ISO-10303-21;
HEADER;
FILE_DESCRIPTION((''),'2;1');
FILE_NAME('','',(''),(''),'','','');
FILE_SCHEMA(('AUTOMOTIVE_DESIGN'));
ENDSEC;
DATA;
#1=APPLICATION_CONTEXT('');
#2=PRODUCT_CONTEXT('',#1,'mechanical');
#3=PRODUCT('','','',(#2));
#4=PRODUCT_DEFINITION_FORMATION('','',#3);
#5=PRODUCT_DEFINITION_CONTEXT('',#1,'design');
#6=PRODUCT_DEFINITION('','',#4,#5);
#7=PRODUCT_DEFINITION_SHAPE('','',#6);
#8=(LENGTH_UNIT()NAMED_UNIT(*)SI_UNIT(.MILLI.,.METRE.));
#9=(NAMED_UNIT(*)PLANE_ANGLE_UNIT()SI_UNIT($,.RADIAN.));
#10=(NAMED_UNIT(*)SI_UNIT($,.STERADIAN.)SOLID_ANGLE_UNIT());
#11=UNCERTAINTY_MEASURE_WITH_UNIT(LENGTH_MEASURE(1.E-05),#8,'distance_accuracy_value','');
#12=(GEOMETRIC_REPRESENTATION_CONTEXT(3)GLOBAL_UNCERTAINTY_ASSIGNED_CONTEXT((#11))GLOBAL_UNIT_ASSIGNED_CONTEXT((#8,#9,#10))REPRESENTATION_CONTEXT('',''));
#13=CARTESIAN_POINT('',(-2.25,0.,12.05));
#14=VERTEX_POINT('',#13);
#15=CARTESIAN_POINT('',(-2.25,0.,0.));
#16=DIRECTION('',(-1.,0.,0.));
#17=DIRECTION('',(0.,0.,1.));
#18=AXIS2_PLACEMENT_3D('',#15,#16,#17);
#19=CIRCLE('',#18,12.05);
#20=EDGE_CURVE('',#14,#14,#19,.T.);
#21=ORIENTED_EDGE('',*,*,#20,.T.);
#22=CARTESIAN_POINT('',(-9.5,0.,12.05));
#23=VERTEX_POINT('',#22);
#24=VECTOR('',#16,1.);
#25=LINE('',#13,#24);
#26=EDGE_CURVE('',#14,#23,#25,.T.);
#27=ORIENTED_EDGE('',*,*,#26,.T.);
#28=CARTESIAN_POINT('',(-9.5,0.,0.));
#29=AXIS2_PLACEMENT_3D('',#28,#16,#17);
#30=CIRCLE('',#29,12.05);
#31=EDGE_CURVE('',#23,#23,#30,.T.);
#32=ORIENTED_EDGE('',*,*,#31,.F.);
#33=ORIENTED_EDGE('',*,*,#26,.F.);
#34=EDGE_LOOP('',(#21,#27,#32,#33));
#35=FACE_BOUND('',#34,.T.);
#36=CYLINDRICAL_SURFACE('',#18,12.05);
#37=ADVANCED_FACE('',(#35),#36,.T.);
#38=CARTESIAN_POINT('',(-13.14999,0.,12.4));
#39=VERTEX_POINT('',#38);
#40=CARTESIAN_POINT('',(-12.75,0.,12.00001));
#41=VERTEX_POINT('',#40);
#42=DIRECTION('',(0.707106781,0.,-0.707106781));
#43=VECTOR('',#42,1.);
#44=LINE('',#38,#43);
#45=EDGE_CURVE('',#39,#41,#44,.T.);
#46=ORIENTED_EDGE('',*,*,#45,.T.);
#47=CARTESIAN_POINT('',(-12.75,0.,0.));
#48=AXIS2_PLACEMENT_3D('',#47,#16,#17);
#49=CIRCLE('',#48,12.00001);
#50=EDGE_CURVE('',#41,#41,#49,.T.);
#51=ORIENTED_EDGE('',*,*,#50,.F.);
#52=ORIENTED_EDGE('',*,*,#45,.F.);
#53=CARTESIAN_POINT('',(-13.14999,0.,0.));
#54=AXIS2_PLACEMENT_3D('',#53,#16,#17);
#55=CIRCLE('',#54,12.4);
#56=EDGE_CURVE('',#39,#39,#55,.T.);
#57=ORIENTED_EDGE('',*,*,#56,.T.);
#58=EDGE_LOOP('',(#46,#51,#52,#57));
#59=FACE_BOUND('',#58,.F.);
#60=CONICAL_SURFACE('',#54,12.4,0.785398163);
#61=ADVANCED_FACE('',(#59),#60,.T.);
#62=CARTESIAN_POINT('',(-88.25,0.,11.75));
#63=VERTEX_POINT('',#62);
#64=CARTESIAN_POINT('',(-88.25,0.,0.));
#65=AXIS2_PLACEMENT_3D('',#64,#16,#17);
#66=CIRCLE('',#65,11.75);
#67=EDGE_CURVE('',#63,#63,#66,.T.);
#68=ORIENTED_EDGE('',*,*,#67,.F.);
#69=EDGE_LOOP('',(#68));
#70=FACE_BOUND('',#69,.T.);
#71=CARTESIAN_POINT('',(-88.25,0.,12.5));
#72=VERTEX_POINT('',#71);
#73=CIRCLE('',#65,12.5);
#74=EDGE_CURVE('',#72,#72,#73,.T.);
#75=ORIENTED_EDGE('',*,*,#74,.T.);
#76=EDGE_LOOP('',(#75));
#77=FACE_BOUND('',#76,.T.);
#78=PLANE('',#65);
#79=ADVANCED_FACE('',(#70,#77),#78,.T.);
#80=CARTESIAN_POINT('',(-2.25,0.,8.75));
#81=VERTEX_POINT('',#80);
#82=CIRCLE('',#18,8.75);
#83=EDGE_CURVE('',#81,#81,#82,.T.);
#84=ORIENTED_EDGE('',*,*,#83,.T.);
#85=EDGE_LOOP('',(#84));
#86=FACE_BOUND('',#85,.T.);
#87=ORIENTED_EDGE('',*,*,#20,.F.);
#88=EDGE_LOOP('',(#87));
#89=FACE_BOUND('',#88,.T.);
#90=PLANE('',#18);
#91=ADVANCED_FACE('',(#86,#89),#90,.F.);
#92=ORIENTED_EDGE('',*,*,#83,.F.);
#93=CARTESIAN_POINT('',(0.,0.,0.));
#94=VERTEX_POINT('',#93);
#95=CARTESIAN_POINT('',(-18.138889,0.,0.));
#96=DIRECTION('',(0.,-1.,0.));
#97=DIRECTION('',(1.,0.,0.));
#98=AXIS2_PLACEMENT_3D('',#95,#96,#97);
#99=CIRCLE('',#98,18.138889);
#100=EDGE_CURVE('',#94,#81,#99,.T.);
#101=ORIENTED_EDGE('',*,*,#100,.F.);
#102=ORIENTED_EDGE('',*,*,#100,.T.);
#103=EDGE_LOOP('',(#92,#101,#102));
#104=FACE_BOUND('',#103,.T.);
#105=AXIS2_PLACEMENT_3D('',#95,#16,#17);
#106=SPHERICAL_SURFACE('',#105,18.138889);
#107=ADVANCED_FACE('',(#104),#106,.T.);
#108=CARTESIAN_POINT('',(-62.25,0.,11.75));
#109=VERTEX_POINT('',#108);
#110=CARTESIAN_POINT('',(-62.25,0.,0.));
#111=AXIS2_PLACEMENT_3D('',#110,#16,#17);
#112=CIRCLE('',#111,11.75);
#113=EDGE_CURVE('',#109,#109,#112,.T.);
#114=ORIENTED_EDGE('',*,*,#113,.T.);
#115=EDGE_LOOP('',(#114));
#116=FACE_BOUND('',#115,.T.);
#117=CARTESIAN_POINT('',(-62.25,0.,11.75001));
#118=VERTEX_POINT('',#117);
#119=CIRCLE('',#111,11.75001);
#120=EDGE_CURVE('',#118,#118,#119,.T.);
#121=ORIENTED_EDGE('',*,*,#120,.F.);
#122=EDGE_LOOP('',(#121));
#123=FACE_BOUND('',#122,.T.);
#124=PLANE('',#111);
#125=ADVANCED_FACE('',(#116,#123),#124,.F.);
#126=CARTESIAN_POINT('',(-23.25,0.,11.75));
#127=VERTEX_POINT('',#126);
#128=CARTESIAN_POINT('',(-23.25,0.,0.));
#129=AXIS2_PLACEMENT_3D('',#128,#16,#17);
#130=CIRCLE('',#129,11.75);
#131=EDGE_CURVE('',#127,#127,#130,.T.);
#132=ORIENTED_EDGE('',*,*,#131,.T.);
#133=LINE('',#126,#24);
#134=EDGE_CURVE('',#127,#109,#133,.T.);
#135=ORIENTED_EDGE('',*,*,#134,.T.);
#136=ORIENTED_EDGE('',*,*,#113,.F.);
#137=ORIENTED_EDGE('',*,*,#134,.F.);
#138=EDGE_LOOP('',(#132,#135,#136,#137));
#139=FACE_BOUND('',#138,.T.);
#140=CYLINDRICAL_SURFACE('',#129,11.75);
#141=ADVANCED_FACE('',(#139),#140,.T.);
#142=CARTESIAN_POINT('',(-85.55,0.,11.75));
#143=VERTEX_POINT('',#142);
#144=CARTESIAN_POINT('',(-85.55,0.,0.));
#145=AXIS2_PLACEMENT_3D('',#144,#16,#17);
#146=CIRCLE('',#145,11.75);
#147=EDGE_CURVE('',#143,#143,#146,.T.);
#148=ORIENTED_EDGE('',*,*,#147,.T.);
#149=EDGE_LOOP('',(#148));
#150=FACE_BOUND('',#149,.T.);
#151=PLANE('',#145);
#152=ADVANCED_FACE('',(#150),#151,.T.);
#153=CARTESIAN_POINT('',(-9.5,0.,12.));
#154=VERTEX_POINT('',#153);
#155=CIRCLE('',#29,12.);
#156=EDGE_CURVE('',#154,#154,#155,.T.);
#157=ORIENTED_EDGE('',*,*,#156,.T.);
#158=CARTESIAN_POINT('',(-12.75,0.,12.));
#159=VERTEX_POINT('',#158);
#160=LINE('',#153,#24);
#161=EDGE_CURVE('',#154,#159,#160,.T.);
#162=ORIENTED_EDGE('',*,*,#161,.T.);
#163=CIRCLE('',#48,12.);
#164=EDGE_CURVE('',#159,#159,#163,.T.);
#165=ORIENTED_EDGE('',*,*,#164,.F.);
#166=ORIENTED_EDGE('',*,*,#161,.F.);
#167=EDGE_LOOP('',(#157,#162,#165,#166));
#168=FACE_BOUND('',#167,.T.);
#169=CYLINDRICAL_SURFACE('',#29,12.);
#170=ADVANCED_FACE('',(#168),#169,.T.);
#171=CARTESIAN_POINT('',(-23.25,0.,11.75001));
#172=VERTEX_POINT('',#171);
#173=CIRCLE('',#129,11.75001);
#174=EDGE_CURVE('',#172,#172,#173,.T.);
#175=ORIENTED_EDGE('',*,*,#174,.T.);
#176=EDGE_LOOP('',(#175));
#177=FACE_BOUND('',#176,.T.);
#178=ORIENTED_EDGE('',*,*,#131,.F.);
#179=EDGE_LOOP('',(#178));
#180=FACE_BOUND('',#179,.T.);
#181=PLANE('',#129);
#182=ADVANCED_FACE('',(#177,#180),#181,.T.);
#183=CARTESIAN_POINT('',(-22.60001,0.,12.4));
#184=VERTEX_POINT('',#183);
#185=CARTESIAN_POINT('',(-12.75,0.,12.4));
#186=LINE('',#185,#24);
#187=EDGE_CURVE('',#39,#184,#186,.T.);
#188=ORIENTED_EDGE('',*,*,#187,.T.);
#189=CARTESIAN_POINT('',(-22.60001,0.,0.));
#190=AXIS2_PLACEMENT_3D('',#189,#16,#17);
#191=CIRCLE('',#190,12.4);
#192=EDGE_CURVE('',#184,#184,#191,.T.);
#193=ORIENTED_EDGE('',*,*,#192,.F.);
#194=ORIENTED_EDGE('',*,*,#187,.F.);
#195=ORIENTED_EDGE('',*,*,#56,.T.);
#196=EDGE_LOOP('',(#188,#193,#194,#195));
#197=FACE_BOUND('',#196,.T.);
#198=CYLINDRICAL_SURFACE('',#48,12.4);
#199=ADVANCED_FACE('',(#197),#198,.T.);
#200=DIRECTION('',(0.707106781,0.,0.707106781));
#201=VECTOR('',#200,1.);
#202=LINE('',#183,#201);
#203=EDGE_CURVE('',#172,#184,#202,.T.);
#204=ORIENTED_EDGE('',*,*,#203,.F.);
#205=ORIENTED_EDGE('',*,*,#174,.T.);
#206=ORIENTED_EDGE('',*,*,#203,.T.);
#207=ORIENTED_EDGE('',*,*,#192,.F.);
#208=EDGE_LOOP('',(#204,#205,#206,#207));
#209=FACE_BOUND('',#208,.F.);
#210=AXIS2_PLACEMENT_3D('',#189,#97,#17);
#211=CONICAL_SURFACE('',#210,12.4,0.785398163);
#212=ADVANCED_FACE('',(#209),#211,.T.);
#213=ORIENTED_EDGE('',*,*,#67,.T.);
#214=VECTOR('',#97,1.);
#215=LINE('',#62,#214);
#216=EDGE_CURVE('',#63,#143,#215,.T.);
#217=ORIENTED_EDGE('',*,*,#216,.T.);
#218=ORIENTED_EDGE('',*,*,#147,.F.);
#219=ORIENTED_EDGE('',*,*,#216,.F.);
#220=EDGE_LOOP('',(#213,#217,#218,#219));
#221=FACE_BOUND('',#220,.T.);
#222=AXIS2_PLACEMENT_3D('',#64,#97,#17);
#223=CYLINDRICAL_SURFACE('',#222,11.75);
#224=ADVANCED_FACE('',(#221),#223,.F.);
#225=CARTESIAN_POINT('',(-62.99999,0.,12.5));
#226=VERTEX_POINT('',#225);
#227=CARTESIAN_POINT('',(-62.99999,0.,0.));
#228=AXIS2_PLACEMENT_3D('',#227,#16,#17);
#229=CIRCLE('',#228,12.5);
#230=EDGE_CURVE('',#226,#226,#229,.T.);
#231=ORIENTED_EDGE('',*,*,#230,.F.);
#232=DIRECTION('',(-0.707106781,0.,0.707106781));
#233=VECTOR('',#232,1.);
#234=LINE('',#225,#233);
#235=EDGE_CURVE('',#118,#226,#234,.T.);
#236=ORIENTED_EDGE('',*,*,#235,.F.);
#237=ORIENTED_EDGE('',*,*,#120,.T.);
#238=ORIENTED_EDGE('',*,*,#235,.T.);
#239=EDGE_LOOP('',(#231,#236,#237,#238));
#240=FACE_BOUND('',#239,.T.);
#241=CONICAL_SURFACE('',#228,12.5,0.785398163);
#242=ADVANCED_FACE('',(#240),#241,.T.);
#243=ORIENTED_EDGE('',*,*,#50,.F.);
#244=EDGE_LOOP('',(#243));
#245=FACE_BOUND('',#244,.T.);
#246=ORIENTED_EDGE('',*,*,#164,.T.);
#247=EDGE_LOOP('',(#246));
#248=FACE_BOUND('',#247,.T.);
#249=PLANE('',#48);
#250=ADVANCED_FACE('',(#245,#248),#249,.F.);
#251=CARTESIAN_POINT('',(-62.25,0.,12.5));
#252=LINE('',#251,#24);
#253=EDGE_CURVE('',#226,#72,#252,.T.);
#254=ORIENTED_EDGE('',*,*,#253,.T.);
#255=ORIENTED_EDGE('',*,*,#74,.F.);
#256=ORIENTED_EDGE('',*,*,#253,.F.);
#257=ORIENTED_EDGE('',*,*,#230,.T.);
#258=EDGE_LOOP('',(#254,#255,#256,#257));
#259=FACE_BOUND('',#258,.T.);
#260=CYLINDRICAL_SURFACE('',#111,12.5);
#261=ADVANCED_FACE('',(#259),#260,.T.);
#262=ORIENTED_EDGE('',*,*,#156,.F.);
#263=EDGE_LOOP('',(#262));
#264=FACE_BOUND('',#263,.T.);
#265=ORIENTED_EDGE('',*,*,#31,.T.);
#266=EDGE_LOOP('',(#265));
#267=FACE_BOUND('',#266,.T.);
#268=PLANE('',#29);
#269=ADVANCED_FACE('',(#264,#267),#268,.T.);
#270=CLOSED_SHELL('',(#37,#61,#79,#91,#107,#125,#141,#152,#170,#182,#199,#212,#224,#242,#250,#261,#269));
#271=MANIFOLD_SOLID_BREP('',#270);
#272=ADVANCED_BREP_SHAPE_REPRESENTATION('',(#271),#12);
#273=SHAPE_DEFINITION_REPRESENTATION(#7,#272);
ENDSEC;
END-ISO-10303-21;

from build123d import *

# Parameters (mm, degrees)
F2_SIZE = 0.74999
F3_SIZE = 0.64999
F4_SIZE = 0.39999


# Not quite as in the source:
# - a fillet or chamfer is up to 0.001 mm smaller than in the source, because OpenCascade refuses the exact size


with BuildPart() as f1:
    # F0 (on Front) → F1 (revolve)
    with BuildSketch(Plane.XZ):
        with BuildLine():
            Line((-85.55, 11.75), (-85.55, 0))
            Line((-85.55, 0), (0, 0))
            ThreePointArc((0, 0), (-0.5715031948, 4.5173277499), (-2.25, 8.75))
            Line((-2.25, 8.75), (-2.25, 12.05))
            Line((-2.25, 12.05), (-9.5, 12.05))
            Line((-9.5, 12.05), (-9.5, 12))
            Line((-9.5, 12), (-12.75, 12))
            Line((-12.75, 12), (-12.75, 12.4))
            Line((-12.75, 12.4), (-23.25, 12.4))
            Line((-23.25, 12.4), (-23.25, 11.75))
            Line((-23.25, 11.75), (-62.25, 11.75))
            Line((-62.25, 11.75), (-62.25, 12.5))
            Line((-62.25, 12.5), (-88.25, 12.5))
            Line((-88.25, 12.5), (-88.25, 11.75))
            Line((-88.25, 11.75), (-85.55, 11.75))
        make_face()
    revolve(axis=Axis((-46.3619604707, 0, 0), (-1, 0, 0)))

    # F2 (size 0.75 in the source; OpenCascade refuses exactly that, so slightly less here)
    f2_edges = [f1.edges().sort_by_distance(p)[0] for p in [
        (-62.25, 0, -12.5),
    ]]
    chamfer(f2_edges, length=F2_SIZE)

    # F3 (size 0.65 in the source; OpenCascade refuses exactly that, so slightly less here)
    f3_edges = [f1.edges().sort_by_distance(p)[0] for p in [
        (-23.25, 0, -12.4),
    ]]
    chamfer(f3_edges, length=F3_SIZE)

    # F4 (size 0.4 in the source; OpenCascade refuses exactly that, so slightly less here)
    f4_edges = [f1.edges().sort_by_distance(p)[0] for p in [
        (-12.75, 0, -12.4),
    ]]
    chamfer(f4_edges, length=F4_SIZE)


solid = f1.part
